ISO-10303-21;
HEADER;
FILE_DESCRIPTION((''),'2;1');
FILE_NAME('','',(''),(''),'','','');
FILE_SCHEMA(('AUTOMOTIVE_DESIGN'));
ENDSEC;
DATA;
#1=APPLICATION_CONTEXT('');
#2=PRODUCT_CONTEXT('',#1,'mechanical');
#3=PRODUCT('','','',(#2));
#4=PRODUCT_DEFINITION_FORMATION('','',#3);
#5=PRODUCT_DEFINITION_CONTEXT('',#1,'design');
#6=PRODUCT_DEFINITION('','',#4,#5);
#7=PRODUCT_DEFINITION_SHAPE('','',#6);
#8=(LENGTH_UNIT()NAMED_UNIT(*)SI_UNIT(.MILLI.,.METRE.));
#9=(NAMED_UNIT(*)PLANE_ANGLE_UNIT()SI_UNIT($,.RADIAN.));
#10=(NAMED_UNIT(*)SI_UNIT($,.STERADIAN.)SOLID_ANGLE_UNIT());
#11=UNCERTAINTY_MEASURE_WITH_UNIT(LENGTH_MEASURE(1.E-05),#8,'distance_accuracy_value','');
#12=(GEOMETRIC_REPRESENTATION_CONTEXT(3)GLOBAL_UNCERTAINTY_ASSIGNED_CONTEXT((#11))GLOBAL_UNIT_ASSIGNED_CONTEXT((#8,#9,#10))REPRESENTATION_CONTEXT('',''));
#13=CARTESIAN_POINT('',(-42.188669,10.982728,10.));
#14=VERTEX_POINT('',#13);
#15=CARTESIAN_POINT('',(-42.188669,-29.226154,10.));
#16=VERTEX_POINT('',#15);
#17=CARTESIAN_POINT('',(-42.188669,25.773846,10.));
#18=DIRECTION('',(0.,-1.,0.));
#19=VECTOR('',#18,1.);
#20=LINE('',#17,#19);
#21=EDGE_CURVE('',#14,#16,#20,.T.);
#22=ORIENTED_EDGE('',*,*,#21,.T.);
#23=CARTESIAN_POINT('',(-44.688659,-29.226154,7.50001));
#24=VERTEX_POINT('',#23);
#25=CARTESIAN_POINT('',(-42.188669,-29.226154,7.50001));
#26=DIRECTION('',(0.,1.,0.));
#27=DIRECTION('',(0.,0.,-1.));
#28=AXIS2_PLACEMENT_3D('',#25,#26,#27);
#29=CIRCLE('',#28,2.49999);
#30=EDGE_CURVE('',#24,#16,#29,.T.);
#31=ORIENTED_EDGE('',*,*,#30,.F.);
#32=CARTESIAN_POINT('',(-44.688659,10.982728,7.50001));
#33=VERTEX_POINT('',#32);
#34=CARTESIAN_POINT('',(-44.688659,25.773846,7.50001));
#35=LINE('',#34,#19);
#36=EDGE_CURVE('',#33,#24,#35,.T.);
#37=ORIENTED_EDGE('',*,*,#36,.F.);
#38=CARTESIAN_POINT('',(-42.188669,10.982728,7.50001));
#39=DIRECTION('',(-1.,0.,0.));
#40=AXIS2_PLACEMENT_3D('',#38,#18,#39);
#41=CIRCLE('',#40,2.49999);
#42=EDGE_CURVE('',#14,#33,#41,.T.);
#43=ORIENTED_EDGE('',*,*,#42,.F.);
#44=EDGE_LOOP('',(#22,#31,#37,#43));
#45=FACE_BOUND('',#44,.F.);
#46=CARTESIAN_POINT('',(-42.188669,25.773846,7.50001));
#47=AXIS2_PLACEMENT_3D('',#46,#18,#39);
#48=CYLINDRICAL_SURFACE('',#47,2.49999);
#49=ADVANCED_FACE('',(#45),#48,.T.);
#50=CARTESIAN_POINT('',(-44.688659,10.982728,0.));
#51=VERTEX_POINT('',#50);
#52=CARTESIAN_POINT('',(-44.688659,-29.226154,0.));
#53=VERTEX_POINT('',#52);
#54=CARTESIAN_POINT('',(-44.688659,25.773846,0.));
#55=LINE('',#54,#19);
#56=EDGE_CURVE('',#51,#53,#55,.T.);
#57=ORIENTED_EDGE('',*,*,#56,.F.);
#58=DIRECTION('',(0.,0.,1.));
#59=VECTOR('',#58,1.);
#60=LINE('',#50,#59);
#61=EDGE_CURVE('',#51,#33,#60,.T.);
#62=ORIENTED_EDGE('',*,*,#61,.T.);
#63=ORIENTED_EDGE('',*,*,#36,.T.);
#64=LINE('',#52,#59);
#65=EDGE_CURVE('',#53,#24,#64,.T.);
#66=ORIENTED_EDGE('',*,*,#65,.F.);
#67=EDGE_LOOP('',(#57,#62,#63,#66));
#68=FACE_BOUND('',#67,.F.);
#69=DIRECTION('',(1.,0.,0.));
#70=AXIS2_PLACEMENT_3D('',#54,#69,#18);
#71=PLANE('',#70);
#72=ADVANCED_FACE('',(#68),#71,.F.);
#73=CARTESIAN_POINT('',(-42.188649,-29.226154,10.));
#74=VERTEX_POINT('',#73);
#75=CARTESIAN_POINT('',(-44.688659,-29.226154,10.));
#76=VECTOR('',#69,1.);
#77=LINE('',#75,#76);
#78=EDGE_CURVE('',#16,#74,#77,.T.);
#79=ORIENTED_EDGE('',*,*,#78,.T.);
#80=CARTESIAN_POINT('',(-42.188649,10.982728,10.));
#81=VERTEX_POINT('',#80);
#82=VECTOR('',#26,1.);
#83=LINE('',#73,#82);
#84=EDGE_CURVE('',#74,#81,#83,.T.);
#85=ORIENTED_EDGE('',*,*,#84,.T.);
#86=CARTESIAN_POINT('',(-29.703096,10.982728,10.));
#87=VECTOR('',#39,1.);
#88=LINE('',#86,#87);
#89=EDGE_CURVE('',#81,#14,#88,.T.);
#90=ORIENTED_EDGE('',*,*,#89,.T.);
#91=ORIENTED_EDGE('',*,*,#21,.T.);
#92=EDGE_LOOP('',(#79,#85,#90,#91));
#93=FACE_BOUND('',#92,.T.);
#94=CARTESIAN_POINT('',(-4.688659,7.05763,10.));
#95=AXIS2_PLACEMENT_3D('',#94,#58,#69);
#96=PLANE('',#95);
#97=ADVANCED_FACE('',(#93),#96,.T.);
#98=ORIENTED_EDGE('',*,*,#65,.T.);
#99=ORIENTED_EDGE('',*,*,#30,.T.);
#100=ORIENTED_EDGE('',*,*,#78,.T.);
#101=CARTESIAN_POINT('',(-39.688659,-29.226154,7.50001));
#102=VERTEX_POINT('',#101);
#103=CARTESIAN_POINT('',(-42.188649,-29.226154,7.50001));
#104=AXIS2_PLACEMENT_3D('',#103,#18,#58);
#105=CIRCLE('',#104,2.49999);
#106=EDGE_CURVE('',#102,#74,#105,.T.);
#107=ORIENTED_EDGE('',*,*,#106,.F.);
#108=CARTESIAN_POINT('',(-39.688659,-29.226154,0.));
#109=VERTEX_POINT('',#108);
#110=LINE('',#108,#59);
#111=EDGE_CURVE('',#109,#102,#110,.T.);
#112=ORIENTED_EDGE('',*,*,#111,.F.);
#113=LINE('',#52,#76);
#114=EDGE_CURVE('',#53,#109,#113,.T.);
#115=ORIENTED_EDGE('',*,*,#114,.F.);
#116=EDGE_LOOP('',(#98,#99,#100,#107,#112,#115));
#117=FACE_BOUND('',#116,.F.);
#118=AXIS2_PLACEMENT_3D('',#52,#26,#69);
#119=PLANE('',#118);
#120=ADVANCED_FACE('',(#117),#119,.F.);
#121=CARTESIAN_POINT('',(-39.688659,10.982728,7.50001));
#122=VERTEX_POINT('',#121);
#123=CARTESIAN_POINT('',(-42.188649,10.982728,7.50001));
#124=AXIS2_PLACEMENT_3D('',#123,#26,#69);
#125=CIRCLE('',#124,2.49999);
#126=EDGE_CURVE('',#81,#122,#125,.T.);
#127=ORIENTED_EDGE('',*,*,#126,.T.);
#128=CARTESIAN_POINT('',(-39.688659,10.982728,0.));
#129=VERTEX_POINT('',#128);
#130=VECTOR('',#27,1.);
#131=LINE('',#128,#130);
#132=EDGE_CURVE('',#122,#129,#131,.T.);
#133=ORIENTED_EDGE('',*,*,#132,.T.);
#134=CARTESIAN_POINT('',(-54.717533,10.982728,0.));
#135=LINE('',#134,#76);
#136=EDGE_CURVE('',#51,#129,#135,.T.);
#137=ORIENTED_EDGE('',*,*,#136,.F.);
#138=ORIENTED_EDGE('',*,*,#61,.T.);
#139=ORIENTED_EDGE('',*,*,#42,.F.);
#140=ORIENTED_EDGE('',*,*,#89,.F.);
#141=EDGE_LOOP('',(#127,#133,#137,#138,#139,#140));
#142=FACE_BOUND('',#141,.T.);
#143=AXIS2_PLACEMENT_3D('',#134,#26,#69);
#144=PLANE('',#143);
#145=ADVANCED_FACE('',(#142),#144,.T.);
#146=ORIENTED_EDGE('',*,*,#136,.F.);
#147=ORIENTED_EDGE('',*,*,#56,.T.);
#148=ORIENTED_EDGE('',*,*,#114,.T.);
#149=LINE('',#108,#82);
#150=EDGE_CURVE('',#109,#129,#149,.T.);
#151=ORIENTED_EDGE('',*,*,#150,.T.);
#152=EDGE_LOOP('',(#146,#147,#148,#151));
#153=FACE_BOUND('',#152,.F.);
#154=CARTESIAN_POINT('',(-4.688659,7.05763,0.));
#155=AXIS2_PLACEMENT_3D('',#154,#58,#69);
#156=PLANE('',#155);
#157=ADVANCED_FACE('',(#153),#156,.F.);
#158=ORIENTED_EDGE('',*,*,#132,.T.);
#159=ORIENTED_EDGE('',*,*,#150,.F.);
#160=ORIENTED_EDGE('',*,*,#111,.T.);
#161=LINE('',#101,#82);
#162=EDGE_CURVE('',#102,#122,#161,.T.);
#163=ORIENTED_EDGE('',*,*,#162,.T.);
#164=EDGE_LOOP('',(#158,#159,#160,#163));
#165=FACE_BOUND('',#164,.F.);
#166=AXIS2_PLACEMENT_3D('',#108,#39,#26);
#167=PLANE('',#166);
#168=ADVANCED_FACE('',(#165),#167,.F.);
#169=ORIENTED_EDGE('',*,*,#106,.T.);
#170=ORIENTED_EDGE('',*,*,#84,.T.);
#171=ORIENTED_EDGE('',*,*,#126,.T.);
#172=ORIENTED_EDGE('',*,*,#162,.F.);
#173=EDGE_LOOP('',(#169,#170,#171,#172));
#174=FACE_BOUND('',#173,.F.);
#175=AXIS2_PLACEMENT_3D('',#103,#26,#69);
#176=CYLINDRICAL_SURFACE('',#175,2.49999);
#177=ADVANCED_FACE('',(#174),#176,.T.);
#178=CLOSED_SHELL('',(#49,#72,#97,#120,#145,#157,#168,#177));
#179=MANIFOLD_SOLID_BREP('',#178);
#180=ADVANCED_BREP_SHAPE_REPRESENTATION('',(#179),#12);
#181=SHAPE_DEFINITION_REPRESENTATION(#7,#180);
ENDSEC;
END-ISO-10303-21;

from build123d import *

# Parameters (mm, degrees)
F1_DEPTH = 10
F2_R     = 2.49999
F3_W     = 11.3749653101
F3_H     = 21.1809808388
F4_DEPTH = 25
F5_DEPTH = 25


# Not quite as in the source:
# - a fillet or chamfer is up to 0.001 mm smaller than in the source, because OpenCascade refuses the exact size


with BuildPart() as f1:
    # F0 (on Top) → F1 (new body)
    with BuildSketch(Plane.XY):
        Polygon((-44.6886586582, 25.7738458982), (-44.6886586582, -29.2261541018), (-39.6886586582, -29.2261541018), (-39.6886586582, 20.7738458982), (30.3113413418, 20.7738458982), (30.3113413418, -29.2261541018), (35.3113413418, -29.2261541018), (35.3113413418, 25.7738458982), align=None)
    extrude(amount=F1_DEPTH)

    # F2 (radius 2.5 in the source; OpenCascade refuses exactly that, so slightly less here)
    f2_edges = [f1.edges().sort_by_distance(p)[0] for p in [
        (-44.688659, -1.726154, 10),
        (-39.688659, -4.226154, 10),
        (30.311341, -4.226154, 10),
        (35.311341, -1.726154, 10),
    ]]
    fillet(f2_edges, radius=F2_R)

    # F3 (on Top) → F4 (cut)
    with BuildSketch(Plane.XY):
        Polygon((47.2649559379, 40.0085151196), (-24.1227895021, 40.0085151196), (-24.1227895021, 10.9827276319), (-24.1227895021, -10.1982532069), (-35.4977548122, -10.1982532069), (-35.4977548122, -43.5386821628), (47.2649559379, -43.5386821628), align=None)
        Polygon((-35.4977548122, 10.9827276319), (-35.4977548122, 40.0085151196), (-24.1227895021, 40.0085151196), (-24.1227895021, 54.521407932), (-54.7175332904, 54.521407932), (-54.7175332904, 10.9827276319), align=None)
        with Locations((-29.8102721572, 0.3922372125)):
            Rectangle(F3_W, F3_H)
    extrude(amount=F4_DEPTH, mode=Mode.SUBTRACT)

    # F5 (cut): a face of the model
    f5_faces = [f1.faces().sort_by_distance(p)[0] for p in [
        (-24.1227895021, 23.2738458982, 5),
    ]]
    extrude(f5_faces, amount=-F5_DEPTH, mode=Mode.SUBTRACT)


solid = f1.part
